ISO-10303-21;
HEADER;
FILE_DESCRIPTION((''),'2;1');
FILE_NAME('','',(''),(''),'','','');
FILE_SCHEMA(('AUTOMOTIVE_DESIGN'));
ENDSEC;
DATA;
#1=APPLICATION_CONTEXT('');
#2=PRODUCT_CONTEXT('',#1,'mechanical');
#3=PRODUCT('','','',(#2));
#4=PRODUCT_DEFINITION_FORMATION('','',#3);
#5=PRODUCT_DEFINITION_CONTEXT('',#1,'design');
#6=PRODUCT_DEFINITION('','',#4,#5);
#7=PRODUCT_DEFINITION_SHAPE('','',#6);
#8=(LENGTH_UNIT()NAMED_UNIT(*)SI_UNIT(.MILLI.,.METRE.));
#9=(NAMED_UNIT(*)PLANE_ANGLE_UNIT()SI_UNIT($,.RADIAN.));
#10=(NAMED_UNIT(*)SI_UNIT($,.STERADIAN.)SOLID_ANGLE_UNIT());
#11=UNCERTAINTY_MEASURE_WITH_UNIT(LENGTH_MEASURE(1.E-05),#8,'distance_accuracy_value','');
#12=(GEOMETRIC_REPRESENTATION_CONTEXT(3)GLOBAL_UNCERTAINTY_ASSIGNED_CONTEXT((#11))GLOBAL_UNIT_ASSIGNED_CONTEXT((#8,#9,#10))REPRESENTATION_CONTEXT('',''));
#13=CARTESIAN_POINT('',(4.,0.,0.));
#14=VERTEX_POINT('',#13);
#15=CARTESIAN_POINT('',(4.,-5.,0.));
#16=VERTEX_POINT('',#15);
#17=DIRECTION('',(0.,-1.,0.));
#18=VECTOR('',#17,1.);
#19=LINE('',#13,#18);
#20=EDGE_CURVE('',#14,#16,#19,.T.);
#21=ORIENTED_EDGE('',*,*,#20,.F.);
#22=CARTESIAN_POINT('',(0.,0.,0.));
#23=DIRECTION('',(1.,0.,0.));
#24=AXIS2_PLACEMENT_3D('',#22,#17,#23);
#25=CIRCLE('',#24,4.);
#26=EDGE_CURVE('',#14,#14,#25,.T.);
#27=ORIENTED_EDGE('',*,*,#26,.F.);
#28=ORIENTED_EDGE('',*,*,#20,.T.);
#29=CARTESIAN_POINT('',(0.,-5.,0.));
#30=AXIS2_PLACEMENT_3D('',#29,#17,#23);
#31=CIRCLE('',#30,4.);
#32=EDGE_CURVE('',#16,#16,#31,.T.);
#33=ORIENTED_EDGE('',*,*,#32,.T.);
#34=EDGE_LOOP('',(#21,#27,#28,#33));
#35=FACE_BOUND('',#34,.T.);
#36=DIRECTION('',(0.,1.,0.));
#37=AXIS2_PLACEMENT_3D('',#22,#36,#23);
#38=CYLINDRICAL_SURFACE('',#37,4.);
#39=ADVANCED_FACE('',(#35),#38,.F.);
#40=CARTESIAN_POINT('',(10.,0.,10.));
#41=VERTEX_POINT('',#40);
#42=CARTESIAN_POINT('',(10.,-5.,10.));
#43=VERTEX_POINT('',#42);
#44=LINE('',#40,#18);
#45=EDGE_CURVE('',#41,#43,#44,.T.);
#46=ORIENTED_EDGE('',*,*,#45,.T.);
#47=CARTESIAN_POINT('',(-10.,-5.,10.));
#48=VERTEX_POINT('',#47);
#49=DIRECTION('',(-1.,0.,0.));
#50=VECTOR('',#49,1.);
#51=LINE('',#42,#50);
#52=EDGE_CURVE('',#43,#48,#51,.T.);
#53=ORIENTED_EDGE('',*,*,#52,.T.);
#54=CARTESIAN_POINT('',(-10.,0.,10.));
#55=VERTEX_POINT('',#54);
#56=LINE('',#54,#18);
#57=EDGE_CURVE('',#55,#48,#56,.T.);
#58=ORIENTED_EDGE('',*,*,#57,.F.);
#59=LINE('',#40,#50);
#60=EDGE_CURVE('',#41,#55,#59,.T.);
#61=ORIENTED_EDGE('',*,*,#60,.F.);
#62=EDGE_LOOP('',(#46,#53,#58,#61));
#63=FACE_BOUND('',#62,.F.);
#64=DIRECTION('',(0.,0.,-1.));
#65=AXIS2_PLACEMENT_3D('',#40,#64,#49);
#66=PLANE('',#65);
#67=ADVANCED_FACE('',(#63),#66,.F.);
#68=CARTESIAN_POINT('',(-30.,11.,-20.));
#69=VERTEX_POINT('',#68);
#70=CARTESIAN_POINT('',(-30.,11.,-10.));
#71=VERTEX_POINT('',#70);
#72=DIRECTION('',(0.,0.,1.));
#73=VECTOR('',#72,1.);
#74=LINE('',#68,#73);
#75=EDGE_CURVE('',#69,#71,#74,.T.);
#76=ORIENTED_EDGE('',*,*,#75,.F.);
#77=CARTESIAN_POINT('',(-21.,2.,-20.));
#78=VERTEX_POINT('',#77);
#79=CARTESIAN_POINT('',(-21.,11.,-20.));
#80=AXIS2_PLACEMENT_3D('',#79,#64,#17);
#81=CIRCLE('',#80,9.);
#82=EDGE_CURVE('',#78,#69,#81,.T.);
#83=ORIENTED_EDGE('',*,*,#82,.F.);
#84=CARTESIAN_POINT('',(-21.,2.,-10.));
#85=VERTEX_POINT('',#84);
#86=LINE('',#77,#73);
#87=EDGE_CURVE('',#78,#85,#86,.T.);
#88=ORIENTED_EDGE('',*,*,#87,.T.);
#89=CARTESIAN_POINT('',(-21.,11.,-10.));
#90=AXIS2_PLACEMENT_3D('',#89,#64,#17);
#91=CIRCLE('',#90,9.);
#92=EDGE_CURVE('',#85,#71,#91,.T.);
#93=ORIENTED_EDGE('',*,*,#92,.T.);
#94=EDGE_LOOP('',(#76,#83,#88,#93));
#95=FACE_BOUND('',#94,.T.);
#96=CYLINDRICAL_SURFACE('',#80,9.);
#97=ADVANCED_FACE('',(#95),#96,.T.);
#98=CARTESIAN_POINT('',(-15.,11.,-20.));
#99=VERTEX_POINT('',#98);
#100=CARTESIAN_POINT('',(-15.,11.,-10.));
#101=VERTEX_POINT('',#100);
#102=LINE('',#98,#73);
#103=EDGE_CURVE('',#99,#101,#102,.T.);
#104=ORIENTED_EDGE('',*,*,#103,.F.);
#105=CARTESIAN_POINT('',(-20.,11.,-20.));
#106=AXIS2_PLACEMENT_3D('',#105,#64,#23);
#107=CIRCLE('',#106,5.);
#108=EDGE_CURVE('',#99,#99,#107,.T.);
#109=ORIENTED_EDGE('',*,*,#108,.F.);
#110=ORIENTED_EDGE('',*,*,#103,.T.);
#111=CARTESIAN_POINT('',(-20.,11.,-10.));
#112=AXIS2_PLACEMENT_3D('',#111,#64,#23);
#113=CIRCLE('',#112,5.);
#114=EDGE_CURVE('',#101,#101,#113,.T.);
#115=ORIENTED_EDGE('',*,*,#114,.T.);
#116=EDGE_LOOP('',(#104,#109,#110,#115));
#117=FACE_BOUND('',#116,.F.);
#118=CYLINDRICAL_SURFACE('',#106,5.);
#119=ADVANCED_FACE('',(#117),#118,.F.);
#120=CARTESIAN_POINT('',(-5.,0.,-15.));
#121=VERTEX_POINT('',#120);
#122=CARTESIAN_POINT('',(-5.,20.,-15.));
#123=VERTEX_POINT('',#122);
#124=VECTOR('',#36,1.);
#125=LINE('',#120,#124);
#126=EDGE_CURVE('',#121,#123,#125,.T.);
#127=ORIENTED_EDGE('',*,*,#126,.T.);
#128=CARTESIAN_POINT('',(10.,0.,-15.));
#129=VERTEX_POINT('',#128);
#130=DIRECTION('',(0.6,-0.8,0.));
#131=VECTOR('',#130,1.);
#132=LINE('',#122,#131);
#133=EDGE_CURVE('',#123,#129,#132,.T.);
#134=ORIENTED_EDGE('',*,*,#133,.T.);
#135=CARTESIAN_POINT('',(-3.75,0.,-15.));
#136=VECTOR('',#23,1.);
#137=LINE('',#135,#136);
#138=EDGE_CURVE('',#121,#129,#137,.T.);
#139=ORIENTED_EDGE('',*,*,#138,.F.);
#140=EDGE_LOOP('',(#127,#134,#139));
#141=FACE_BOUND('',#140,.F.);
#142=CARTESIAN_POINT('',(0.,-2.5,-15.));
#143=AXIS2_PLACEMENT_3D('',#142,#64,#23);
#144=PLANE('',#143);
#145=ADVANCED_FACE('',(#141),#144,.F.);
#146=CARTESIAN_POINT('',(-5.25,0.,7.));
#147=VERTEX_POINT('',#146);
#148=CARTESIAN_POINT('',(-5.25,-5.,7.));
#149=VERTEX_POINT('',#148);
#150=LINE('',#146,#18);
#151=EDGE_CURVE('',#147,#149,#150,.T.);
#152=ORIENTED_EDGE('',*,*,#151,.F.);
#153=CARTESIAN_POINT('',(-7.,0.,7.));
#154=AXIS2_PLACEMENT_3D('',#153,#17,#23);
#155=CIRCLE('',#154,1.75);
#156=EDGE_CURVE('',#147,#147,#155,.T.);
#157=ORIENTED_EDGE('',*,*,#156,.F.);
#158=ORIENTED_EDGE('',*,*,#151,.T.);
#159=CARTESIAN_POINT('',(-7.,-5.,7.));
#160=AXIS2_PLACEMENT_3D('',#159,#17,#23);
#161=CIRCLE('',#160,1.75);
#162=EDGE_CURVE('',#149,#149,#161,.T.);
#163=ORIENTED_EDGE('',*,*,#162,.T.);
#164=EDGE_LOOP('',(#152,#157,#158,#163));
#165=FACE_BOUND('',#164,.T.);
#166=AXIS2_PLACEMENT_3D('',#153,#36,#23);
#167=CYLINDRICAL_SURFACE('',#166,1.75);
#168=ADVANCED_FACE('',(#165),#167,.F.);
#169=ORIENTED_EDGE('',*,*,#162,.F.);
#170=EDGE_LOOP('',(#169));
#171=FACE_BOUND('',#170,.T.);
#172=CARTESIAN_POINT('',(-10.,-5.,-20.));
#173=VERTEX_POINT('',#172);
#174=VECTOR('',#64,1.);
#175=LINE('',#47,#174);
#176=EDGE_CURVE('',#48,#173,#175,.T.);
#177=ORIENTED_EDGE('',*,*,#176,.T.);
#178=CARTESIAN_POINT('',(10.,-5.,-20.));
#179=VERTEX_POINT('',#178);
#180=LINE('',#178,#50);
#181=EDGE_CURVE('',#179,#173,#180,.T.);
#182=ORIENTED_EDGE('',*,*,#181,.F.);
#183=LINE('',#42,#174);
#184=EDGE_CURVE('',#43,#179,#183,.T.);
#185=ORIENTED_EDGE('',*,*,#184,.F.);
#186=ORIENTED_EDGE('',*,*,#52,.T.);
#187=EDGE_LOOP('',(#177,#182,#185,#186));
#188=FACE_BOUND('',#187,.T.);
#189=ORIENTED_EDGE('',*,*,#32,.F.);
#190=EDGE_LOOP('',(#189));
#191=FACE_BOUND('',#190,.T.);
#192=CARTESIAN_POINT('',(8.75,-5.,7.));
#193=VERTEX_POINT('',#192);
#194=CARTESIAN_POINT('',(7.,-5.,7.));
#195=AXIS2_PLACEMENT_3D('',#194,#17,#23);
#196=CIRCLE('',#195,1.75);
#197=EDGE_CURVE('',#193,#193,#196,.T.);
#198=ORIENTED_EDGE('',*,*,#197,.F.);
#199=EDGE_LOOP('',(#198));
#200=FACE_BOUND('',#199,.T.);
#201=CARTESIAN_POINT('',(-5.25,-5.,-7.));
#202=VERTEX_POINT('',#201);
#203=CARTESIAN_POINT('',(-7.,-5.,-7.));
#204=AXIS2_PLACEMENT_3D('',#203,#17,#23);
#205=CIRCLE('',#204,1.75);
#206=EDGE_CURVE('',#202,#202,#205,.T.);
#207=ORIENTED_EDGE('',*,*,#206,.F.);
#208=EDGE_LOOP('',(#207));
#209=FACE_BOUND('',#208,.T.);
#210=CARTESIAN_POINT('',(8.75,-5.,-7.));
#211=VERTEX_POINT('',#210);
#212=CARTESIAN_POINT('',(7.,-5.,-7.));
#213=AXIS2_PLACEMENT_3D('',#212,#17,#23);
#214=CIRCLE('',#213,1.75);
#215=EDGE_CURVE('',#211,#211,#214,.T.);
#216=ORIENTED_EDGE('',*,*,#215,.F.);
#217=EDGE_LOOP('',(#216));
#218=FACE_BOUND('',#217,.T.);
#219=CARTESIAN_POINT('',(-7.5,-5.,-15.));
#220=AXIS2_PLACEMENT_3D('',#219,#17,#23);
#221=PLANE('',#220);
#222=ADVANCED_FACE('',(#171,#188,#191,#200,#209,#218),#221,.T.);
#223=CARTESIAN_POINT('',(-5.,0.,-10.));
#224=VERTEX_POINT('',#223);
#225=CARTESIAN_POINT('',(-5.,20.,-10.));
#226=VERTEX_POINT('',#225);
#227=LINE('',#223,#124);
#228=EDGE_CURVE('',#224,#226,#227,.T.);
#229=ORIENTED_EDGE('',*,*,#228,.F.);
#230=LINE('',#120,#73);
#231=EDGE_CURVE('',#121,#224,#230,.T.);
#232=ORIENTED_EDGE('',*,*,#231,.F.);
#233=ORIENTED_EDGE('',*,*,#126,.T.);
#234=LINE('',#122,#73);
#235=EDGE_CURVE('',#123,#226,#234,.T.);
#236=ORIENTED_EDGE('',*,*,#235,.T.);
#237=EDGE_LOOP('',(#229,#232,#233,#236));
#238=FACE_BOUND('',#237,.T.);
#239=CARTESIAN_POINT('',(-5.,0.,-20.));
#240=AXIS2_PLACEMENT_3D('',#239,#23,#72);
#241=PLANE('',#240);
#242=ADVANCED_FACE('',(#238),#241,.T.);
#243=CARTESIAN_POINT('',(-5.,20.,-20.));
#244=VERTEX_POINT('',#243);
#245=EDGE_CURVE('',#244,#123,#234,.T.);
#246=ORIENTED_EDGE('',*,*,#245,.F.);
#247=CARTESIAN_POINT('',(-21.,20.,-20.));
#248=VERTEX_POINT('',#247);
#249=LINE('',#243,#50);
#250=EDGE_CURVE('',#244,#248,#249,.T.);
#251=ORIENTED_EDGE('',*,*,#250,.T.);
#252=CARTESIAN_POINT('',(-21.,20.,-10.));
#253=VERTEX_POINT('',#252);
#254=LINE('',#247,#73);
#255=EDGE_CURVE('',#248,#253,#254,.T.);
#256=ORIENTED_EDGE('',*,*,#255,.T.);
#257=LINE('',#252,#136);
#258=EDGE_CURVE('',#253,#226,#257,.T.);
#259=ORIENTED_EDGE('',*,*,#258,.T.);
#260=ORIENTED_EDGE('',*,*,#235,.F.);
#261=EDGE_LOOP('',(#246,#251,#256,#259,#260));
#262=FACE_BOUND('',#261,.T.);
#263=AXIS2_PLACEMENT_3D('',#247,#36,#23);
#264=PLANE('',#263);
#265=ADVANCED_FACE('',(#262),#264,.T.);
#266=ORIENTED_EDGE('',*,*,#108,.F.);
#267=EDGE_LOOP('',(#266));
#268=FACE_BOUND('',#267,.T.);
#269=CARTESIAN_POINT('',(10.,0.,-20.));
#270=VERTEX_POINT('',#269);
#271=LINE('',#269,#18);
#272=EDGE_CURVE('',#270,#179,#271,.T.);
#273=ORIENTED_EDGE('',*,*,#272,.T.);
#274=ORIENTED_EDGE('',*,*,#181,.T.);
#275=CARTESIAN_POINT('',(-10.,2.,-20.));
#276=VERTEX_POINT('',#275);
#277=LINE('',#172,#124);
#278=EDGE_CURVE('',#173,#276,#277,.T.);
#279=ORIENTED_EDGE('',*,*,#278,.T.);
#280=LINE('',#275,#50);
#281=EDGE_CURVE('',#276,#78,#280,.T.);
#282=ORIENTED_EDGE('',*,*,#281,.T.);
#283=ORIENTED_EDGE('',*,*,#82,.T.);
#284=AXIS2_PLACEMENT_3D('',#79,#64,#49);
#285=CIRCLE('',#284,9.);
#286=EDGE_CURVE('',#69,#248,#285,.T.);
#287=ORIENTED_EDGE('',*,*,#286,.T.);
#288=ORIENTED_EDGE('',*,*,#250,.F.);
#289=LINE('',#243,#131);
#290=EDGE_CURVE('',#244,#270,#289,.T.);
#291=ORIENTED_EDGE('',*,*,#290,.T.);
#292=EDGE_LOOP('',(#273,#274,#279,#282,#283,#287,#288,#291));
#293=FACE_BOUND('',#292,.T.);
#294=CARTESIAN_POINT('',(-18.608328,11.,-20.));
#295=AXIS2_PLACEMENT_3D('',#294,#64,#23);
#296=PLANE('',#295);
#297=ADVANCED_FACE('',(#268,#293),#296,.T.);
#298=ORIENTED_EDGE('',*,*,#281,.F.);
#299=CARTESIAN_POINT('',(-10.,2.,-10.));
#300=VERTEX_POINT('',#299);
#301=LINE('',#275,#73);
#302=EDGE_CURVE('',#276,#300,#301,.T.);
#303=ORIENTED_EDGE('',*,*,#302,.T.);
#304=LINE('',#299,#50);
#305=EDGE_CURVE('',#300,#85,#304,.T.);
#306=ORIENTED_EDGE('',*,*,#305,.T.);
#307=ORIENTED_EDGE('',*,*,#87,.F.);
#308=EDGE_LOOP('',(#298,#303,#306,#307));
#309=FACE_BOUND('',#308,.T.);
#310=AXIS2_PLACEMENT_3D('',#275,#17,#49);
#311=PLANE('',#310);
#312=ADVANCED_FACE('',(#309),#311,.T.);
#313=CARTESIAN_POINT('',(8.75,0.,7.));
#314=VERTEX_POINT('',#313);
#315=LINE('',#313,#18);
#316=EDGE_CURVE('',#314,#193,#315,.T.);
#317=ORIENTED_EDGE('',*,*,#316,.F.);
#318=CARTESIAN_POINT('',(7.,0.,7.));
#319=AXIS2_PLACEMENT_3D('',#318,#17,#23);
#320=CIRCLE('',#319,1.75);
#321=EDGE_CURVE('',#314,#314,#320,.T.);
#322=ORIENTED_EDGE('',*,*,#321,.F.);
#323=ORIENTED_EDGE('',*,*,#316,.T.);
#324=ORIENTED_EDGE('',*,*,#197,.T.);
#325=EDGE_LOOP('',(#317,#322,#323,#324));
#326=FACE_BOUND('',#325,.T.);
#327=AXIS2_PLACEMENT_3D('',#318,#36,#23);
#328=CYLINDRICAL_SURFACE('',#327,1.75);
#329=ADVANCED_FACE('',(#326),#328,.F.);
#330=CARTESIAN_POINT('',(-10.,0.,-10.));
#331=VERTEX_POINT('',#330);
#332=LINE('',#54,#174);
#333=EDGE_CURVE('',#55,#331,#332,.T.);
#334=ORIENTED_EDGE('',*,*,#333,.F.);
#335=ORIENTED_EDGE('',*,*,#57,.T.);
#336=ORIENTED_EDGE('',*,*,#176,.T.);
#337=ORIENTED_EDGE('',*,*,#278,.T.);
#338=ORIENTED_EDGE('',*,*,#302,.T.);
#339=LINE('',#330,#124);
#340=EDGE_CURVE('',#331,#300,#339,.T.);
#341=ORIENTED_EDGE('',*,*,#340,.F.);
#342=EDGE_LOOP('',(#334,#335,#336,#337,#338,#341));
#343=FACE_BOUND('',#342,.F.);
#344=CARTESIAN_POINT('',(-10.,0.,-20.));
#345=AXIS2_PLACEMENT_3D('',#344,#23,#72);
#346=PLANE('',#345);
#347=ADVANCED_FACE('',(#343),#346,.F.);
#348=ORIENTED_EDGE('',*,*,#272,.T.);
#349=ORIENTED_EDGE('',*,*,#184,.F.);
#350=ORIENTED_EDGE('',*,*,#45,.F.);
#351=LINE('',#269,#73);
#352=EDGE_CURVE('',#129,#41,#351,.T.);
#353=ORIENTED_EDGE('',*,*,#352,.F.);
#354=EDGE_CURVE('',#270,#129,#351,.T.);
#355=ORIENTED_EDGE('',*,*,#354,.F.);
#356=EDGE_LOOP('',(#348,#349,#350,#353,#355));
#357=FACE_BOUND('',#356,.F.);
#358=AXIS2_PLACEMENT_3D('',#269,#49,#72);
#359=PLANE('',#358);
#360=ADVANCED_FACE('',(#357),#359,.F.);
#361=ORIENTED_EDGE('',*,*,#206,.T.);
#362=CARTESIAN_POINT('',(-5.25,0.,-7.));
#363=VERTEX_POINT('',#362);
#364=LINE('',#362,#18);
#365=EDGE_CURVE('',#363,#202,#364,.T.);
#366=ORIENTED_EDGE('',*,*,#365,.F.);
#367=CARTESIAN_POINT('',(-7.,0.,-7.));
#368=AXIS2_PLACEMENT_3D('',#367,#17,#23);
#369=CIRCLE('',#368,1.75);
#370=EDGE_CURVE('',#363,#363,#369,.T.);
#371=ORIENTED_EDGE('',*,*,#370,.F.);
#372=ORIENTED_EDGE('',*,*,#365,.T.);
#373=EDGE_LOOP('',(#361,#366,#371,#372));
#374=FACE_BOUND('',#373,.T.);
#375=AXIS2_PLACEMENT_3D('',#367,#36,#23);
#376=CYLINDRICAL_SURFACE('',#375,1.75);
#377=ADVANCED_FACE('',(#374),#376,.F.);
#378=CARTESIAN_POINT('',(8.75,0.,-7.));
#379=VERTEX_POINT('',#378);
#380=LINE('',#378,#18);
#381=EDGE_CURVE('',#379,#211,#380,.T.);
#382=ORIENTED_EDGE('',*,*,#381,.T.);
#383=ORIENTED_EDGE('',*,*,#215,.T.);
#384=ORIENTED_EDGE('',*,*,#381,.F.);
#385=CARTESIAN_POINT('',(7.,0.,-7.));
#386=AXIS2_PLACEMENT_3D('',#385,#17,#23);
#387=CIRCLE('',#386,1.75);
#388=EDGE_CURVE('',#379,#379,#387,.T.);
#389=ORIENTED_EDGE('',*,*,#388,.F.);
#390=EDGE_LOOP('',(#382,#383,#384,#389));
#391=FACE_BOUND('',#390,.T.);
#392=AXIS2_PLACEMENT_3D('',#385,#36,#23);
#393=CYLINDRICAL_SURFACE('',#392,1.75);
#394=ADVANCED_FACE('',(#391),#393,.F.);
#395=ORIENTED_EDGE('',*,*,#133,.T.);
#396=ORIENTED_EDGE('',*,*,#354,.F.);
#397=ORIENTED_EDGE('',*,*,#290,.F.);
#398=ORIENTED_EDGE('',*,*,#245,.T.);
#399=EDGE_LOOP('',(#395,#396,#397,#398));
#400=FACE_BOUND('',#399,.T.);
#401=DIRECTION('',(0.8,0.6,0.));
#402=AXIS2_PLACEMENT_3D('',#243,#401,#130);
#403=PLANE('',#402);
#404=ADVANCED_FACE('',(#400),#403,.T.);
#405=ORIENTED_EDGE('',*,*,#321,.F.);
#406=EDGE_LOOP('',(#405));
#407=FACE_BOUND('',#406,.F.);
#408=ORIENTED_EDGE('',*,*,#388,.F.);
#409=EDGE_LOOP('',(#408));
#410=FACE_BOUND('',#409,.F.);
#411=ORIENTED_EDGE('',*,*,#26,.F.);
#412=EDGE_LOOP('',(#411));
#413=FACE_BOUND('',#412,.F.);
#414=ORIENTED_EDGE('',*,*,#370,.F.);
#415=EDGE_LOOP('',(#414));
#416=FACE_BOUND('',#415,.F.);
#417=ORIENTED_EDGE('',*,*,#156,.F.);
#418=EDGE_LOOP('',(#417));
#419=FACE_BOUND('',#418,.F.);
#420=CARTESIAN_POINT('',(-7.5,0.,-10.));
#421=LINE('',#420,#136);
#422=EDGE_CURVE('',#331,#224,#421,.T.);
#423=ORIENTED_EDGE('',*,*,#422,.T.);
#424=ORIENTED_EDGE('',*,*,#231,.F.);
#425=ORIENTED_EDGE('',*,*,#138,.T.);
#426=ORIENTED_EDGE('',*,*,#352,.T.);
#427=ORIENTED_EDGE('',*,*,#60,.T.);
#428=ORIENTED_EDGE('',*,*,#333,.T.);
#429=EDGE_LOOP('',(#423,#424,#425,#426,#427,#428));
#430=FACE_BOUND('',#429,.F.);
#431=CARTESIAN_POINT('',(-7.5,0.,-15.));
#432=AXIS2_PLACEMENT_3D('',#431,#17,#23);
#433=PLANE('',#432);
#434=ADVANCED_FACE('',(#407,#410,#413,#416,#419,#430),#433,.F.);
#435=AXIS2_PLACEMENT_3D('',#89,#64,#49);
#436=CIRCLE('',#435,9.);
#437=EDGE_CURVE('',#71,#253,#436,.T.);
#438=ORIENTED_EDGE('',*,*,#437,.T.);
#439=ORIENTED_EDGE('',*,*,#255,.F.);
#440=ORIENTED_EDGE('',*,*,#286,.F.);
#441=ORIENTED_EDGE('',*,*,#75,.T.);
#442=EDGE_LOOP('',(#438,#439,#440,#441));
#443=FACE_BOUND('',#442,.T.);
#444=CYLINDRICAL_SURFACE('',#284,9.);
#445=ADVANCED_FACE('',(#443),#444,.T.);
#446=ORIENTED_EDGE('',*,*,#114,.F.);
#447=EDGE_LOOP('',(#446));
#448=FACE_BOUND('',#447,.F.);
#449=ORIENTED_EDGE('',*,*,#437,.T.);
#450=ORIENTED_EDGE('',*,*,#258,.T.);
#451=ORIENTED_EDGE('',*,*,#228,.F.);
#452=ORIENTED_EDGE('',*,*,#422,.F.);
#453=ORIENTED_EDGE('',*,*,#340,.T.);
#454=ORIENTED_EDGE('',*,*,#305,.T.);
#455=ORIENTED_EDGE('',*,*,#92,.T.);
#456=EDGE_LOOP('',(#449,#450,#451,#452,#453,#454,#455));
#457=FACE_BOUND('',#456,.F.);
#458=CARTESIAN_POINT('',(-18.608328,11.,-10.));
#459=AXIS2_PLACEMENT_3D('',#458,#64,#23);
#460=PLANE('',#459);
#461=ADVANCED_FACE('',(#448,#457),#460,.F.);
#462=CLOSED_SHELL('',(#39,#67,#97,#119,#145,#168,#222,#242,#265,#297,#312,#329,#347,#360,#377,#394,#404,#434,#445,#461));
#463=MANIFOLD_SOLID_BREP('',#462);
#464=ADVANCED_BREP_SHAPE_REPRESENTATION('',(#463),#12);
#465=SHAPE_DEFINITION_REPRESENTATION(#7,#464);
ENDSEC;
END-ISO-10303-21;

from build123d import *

# Parameters (mm, degrees)
F0_R          = 1.75
F0_R_2        = 4
F0_W          = 5
F0_H          = 10
F1_DEPTH      = 5
F2_DEPTH      = 5
F2_DEPTH_BACK = 20
F3_R          = 5
F4_DEPTH      = 10
F6_DEPTH      = 5


with BuildPart() as f1:
    # F0 (on Front) → F1 (new body)
    with BuildSketch(Plane.XZ):
        Polygon((10, -10), (10, 10), (-10, 10), (-10, -10), (-5, -10), (-5, -20), (5, -20), (5, -10), align=None)
        with Locations((-7, -7)):
            Circle(F0_R, mode=Mode.SUBTRACT)
        with Locations((7, -7)):
            Circle(F0_R, mode=Mode.SUBTRACT)
        with Locations((-7, 7)):
            Circle(F0_R, mode=Mode.SUBTRACT)
        Circle(F0_R_2, mode=Mode.SUBTRACT)
        with Locations((7, 7)):
            Circle(F0_R, mode=Mode.SUBTRACT)
        with Locations((7.5, -15)):
            Rectangle(F0_W, F0_H)
    extrude(amount=F1_DEPTH)

    # F0 (on Front) → F2 (join, two sides)
    with BuildSketch(Plane.XZ) as f2_sk:
        with Locations((-7.5, -15)):
            Rectangle(F0_W, F0_H)
    extrude(amount=F2_DEPTH)
    extrude(f2_sk.sketch, amount=-F2_DEPTH_BACK)

    # F3 (on face) → F4 (join)
    with BuildSketch(Plane(origin=(0, 0, -20), x_dir=(1, 0, 0), z_dir=(0, 0, -1))):
        with BuildLine():
            Line((-21, -20), (-10, -20))
            Line((-10, -20), (-10, -2))
            Line((-10, -2), (-21, -2))
            ThreePointArc((-21, -2), (-27.3639610307, -4.6360389693), (-30, -11))
            ThreePointArc((-30, -11), (-27.3639610307, -17.3639610307), (-21, -20))
        make_face()
        with Locations((-20, -11)):
            Circle(F3_R, mode=Mode.SUBTRACT)
    extrude(amount=-F4_DEPTH)

    # F5 (on face) → F6 (join)
    with BuildSketch(Plane(origin=(0, 0, -20), x_dir=(1, 0, 0), z_dir=(0, 0, -1))):
        Polygon((-10, 5), (-10, 0), (-5, 0), (10, 0), (10, 5), align=None)
        Polygon((10, 0), (-5, 0), (-5, -20), align=None)
    extrude(amount=-F6_DEPTH)


solid = f1.part
